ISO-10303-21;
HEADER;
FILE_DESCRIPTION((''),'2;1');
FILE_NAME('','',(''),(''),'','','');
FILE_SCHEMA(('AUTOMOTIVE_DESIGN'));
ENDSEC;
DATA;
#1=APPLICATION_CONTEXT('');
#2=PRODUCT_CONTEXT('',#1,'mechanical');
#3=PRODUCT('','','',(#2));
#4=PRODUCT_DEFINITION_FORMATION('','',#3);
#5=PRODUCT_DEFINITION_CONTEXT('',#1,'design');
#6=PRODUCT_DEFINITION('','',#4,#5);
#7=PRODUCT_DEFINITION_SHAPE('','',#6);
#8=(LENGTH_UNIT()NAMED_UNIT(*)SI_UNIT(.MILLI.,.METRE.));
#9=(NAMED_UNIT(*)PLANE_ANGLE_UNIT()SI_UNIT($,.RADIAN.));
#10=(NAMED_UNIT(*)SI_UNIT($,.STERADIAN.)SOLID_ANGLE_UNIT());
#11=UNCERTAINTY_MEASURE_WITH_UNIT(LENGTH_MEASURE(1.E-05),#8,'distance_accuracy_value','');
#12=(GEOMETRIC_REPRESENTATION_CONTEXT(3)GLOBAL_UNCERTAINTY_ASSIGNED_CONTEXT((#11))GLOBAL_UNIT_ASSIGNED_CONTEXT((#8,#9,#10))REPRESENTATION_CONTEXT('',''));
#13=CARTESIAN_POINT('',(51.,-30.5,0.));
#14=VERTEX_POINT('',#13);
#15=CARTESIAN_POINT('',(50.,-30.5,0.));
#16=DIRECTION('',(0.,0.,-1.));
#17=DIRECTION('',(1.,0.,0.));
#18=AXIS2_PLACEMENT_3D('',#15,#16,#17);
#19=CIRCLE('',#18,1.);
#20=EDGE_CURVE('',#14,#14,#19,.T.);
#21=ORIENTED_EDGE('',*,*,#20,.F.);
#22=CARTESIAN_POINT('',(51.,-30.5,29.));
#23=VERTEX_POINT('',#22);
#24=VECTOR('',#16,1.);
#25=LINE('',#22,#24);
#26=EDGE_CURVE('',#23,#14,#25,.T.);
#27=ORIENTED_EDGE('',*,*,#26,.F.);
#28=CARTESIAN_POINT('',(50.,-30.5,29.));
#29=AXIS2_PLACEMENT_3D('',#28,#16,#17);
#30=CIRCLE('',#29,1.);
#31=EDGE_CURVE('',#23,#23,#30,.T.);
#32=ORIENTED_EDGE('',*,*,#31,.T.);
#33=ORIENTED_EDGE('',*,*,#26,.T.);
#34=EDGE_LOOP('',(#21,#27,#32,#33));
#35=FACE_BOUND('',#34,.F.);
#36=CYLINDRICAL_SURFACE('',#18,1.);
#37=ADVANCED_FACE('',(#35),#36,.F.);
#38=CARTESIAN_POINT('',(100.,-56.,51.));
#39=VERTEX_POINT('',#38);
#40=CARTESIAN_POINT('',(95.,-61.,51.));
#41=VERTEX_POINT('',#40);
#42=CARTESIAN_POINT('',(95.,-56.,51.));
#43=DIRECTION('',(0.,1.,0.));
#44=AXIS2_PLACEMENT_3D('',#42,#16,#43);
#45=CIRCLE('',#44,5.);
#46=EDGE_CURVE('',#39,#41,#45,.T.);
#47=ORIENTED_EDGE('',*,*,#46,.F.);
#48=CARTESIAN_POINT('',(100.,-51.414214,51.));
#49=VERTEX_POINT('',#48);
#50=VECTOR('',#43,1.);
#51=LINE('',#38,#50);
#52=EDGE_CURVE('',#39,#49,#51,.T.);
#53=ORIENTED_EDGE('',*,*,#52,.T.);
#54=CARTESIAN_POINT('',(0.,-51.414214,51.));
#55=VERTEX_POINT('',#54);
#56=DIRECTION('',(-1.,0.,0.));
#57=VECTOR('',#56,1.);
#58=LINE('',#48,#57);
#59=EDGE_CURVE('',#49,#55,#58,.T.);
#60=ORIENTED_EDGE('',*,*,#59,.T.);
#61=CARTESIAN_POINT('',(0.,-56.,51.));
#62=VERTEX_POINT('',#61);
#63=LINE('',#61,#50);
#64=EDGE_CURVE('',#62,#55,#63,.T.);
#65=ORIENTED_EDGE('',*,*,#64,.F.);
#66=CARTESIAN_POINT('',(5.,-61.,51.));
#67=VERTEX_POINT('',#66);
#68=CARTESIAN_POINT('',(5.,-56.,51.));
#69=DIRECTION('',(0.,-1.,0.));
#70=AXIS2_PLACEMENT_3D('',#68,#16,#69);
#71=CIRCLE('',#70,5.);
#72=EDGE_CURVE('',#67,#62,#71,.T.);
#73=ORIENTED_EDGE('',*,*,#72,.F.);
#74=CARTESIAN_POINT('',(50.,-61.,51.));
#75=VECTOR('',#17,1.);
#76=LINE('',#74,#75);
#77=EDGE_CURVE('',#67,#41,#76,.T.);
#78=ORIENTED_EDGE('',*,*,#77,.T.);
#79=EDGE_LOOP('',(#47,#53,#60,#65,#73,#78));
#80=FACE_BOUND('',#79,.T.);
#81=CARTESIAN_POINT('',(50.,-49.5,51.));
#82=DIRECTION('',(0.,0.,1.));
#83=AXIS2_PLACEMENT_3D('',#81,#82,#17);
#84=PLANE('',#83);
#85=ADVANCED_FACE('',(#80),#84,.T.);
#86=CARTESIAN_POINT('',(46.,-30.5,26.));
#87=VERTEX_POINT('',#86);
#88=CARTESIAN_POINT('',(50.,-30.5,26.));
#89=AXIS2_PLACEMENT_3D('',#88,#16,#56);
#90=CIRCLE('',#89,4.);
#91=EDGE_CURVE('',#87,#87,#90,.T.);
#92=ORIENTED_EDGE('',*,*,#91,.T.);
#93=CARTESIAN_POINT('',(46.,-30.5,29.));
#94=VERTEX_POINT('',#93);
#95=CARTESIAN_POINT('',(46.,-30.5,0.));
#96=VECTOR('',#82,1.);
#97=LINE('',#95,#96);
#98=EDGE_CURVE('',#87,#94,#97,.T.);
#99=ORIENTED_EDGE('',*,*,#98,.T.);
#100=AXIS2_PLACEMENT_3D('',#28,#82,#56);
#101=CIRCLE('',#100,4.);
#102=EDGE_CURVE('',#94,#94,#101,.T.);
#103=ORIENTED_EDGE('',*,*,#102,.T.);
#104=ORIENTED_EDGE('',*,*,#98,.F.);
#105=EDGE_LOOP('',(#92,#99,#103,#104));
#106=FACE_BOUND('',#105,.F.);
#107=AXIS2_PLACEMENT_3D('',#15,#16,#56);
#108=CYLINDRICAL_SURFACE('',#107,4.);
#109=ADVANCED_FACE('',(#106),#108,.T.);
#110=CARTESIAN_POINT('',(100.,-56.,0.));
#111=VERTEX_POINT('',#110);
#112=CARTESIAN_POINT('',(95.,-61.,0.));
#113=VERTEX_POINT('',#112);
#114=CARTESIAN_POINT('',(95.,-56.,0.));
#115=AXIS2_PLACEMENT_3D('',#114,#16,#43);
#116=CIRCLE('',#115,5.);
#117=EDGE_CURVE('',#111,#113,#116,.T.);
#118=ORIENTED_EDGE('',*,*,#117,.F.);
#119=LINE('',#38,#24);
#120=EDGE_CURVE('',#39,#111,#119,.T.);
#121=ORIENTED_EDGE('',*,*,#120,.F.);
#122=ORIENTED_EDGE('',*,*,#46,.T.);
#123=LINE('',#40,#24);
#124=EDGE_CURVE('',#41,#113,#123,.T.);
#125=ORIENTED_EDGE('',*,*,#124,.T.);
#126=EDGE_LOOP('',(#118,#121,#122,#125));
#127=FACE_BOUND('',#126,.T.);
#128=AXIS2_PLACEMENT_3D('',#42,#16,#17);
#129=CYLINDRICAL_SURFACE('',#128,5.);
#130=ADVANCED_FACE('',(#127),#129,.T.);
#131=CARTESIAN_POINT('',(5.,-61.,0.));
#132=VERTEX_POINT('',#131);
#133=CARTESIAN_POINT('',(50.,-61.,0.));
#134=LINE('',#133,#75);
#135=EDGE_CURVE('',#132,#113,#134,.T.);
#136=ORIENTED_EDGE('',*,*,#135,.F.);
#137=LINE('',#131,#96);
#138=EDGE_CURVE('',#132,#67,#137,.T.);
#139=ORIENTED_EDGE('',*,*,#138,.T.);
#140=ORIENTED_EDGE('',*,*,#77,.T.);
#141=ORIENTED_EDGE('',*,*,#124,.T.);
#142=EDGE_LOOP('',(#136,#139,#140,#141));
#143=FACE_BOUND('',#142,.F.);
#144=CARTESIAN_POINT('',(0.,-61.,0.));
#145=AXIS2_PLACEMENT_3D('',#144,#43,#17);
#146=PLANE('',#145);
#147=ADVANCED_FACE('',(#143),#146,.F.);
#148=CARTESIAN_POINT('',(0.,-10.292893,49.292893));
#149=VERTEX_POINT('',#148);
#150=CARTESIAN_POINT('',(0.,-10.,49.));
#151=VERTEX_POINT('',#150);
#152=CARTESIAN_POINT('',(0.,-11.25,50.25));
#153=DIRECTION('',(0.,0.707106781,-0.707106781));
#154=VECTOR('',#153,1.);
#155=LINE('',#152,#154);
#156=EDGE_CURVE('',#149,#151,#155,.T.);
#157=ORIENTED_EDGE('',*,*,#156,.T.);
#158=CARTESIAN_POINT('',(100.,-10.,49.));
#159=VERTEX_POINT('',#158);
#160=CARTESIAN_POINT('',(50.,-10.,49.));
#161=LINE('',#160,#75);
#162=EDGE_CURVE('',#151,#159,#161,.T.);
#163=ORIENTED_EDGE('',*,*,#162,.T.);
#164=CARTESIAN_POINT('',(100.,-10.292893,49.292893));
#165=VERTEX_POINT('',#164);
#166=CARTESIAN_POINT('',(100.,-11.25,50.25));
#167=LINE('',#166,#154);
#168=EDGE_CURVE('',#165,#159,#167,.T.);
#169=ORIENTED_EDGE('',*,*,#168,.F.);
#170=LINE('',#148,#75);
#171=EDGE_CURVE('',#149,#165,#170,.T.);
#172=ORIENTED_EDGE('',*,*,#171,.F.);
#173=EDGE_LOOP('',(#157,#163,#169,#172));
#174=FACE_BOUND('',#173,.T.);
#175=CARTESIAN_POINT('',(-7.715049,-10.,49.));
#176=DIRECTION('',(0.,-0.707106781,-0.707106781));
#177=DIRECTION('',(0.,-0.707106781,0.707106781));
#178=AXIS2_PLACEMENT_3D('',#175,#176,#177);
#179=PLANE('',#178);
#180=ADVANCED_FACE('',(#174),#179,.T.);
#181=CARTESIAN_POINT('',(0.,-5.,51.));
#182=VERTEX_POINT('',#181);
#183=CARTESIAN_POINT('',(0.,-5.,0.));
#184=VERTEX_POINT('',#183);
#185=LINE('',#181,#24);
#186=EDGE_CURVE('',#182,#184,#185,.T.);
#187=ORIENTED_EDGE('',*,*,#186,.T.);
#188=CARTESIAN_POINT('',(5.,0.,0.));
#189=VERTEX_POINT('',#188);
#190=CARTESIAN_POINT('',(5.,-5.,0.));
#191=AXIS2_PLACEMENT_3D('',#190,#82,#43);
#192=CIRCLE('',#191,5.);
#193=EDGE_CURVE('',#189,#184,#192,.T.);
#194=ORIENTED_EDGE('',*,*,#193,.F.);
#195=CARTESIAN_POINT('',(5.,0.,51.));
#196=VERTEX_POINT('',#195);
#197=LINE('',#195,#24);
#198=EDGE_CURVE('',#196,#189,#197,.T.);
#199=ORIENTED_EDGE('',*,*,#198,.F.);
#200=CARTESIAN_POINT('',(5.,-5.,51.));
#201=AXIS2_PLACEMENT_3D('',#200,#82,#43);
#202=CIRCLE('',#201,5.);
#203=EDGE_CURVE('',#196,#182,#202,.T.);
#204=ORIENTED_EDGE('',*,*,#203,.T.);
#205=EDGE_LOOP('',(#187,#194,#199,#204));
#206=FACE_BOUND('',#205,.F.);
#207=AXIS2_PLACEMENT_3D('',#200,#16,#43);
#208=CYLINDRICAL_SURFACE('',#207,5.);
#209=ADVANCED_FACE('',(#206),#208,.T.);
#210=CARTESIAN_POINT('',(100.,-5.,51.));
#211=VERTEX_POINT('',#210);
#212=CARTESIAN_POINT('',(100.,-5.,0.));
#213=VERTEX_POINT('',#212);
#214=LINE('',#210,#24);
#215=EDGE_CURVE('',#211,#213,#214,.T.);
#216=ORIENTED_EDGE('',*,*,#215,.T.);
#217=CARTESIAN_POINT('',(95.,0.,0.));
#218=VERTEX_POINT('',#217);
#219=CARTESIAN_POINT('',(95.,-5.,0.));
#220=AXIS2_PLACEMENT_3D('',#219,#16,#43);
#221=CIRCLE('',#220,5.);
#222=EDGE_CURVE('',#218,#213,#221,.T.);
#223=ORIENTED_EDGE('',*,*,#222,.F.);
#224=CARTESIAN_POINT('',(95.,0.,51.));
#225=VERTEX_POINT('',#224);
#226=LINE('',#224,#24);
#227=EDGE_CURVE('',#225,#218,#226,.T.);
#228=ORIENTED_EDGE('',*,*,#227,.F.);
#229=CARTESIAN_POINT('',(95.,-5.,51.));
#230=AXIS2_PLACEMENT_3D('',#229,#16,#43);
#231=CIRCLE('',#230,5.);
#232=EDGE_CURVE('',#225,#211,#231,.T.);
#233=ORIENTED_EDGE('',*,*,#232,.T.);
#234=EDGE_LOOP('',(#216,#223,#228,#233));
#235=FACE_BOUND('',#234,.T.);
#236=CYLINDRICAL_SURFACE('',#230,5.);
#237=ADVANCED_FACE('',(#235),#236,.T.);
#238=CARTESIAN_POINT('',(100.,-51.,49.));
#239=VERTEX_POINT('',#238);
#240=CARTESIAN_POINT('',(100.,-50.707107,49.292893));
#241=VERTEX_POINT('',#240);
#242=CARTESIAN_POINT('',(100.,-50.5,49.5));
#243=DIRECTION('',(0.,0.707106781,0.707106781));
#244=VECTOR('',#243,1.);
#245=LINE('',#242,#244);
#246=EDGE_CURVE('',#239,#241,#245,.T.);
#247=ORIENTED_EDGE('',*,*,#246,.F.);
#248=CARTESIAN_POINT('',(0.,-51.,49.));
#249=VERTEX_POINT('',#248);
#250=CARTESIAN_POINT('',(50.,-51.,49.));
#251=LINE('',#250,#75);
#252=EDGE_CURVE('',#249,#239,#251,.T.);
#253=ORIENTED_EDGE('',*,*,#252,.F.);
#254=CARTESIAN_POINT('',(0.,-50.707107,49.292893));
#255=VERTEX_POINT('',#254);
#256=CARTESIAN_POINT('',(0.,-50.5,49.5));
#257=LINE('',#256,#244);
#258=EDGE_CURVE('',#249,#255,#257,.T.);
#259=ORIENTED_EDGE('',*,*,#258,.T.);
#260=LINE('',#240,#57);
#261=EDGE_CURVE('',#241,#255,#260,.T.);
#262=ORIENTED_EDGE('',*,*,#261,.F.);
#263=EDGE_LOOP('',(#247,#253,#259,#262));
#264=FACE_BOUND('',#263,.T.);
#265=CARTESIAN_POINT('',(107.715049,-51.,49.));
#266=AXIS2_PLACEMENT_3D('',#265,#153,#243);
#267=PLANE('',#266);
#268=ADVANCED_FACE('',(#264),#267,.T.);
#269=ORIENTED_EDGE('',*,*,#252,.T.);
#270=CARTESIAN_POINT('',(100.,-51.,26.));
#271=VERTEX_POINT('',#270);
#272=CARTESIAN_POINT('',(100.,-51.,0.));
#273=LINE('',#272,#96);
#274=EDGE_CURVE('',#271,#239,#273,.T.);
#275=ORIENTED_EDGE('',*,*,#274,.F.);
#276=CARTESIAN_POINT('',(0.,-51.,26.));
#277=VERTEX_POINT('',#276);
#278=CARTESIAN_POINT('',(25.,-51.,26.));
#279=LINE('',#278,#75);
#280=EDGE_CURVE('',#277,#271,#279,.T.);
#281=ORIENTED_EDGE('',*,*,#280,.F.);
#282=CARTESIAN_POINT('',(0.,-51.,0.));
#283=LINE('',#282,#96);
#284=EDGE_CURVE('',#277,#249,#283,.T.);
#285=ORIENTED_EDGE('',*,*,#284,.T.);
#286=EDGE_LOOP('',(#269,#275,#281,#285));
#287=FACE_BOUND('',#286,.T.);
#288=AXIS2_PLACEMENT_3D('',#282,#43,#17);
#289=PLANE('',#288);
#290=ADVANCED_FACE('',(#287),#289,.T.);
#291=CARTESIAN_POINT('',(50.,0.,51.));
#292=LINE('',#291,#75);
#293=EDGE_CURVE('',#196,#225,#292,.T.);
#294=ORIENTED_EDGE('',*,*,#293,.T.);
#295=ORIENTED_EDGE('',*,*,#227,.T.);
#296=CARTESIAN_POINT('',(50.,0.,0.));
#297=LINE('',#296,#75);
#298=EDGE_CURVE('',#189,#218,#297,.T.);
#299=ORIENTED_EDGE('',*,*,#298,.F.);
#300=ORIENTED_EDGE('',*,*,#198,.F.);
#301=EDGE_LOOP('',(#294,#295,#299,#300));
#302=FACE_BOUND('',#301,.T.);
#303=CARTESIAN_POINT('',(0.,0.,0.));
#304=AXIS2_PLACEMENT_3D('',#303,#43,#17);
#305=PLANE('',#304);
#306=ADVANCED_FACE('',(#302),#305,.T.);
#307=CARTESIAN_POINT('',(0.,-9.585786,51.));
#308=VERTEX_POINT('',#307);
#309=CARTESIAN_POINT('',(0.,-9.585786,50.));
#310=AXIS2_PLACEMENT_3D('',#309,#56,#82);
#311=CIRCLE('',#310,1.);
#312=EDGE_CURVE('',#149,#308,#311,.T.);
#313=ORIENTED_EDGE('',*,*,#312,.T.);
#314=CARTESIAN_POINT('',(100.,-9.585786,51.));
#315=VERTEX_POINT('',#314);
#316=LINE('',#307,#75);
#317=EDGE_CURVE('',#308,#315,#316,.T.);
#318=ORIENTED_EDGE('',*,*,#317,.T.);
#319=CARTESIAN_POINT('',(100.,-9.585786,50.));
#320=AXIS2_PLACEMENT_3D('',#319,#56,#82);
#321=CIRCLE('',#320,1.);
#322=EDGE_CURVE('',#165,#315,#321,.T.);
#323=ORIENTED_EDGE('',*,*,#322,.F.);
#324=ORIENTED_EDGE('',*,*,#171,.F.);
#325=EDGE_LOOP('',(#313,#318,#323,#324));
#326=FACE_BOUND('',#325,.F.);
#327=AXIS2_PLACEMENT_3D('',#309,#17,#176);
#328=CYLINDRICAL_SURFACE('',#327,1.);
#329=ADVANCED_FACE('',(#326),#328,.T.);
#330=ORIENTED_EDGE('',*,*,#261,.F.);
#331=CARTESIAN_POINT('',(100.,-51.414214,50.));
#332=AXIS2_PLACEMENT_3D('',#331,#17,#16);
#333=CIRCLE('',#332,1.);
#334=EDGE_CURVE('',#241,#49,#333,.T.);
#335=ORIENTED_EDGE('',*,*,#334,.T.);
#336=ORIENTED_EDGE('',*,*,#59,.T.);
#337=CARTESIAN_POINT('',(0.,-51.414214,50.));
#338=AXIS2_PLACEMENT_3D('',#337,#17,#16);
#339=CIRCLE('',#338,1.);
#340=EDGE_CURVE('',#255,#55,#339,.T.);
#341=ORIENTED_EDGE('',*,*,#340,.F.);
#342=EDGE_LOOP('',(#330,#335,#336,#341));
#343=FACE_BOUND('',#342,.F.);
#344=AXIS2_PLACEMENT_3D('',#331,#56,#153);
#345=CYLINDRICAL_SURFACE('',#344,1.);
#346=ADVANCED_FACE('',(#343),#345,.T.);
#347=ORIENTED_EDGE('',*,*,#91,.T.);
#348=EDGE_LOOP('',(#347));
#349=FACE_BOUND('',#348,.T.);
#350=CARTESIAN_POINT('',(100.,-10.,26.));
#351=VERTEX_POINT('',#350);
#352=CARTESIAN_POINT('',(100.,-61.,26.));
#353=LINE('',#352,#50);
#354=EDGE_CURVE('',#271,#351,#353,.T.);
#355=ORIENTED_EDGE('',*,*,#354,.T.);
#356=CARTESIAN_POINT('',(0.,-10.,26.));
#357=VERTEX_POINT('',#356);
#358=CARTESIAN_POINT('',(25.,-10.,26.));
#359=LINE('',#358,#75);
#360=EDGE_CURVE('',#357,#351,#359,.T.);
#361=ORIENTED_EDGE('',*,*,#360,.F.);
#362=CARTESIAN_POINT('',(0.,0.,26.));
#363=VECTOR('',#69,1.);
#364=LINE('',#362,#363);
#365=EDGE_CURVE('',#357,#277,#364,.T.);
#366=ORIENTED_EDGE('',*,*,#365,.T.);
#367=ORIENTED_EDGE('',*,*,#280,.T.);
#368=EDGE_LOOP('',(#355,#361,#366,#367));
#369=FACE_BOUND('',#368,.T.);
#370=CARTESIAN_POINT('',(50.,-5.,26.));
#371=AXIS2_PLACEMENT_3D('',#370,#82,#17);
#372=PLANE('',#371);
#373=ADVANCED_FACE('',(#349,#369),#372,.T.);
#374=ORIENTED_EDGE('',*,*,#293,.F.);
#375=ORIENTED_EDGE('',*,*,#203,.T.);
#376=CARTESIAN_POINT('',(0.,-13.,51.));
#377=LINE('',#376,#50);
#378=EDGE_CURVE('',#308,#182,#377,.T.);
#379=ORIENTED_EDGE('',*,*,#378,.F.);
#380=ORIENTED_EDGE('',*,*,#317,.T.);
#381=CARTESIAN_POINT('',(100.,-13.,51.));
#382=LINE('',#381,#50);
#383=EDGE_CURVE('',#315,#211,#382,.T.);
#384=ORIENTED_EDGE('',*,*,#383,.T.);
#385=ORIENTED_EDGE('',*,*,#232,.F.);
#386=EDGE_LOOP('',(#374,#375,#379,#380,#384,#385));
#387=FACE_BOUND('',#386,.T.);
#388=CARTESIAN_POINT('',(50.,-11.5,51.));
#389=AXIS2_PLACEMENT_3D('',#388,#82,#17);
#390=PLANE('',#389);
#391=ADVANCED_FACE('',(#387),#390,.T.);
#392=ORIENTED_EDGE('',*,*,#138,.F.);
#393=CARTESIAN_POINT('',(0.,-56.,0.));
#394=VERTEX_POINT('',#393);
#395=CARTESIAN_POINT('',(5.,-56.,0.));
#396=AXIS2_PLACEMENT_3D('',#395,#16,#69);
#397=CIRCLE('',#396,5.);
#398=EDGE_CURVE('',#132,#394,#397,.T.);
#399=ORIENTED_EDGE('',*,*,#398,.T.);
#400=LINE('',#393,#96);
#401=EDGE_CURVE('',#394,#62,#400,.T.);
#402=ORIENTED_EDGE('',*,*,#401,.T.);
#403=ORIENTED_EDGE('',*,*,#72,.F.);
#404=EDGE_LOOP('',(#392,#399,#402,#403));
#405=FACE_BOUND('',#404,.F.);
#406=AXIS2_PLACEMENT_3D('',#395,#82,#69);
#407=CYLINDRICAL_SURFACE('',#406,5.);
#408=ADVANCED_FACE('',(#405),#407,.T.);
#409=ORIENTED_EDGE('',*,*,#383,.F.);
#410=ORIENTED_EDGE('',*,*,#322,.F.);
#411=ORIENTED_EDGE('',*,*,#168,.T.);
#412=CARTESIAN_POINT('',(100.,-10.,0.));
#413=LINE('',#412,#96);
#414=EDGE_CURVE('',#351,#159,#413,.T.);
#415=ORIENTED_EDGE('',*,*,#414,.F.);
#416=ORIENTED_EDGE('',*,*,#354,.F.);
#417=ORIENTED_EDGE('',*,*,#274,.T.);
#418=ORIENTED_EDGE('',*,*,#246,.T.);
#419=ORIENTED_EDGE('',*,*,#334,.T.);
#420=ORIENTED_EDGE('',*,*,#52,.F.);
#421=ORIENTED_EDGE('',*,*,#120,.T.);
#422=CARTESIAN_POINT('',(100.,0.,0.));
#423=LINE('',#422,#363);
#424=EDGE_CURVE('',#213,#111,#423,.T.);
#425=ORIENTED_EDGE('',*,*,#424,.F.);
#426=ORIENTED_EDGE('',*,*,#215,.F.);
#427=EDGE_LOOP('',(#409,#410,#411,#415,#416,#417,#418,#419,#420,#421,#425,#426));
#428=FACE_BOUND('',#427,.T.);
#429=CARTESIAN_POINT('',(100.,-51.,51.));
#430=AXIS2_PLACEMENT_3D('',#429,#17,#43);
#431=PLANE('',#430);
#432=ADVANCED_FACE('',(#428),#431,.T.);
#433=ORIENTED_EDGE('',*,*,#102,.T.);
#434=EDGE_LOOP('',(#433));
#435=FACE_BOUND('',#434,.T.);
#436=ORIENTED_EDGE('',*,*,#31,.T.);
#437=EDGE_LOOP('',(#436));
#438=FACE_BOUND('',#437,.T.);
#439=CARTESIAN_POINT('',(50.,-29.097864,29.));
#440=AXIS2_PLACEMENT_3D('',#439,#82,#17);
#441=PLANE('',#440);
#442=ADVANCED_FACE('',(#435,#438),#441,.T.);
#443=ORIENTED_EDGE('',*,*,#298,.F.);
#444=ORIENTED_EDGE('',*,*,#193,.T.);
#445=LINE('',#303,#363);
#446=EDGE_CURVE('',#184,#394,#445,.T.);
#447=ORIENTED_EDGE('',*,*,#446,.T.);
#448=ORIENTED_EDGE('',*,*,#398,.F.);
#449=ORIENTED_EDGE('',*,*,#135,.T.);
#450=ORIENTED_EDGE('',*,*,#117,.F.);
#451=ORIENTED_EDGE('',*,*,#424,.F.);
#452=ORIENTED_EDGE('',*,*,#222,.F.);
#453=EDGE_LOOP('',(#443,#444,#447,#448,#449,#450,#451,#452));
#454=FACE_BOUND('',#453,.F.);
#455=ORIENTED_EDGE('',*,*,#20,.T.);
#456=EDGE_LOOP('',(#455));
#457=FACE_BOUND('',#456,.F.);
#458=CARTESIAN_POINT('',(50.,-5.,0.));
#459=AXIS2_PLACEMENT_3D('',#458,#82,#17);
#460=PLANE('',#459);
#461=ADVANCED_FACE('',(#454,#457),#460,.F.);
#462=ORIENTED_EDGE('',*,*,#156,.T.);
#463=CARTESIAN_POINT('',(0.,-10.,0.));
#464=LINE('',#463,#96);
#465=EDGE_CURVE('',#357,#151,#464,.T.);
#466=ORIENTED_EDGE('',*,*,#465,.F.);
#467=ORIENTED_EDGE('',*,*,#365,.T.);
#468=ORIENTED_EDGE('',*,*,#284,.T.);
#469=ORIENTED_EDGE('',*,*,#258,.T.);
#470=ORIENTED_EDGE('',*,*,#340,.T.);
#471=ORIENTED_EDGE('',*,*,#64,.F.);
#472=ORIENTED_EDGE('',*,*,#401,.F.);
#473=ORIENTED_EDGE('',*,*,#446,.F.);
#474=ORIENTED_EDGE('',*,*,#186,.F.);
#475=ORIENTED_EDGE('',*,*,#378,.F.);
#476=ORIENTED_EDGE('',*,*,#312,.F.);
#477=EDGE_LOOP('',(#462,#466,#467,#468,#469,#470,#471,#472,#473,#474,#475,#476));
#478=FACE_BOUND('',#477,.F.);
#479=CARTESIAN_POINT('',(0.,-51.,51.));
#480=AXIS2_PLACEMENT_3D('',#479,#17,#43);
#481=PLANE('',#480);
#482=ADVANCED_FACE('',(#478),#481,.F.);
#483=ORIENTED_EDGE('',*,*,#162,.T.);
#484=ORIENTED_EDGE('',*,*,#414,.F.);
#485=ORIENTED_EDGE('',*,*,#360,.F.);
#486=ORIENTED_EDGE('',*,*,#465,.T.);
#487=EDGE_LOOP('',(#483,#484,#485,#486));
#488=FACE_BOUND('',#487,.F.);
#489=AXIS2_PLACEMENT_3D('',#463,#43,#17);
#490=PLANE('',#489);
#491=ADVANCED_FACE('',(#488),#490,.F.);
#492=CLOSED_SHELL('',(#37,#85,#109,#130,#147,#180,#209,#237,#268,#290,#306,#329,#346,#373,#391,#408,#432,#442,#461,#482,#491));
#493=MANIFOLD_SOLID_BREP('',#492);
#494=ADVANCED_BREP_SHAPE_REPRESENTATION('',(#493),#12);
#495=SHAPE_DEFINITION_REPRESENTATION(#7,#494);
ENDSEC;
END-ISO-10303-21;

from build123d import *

# Parameters (mm, degrees)
F0_W         = 100
F0_H         = 10
F1_DEPTH     = 51
F2_DEPTH     = 26
F3_DEPTH     = 29
F4_R         = 5
F5_W         = 100
F5_H         = 3
F6_DEPTH     = 2
F7_T4_DEPTH  = 115.4300979278
F8_W         = 100
F8_H         = 3
F9_DEPTH     = 2
F10_T4_DEPTH = 115.4300979278
F11_R        = 1


# Not quite as in the source:
# - a fillet or chamfer that OpenCascade refuses, or shapes differently, is made with other operations: its cross-section is extruded or revolved along the edge and cut away or added


with BuildPart() as f1:
    # F0 (on Top) → F1 (new body)
    with BuildSketch(Plane.XY):
        with Locations((50, -5)):
            Rectangle(F0_W, F0_H)
    extrude(amount=F1_DEPTH)



with BuildPart() as f1b:
    # F0 (on Top) → F1, piece 2 (new body)
    with BuildSketch(Plane.XY):
        with Locations((50, -56)):
            Rectangle(F0_W, F0_H)
    extrude(amount=F1_DEPTH)


with BuildPart() as f1_1:
    add(f1.part)

    add(f1b.part)  # F2 merges F1b
    # F0 (on Top) → F2 (join)
    with BuildSketch(Plane.XY):
        with Locations((50, -5)):
            Rectangle(F0_W, F0_H)
        with BuildLine():
            Line((100, -10), (0, -10))
            Line((0, -10), (0, -30.5))
            Line((0, -30.5), (46, -30.5))
            ThreePointArc((46, -30.5), (50, -26.5), (54, -30.5))
            Line((54, -30.5), (100, -30.5))
            Line((100, -30.5), (100, -10))
        make_face()
        with BuildLine():
            Line((46, -30.5), (0, -30.5))
            Line((0, -30.5), (0, -51))
            Line((0, -51), (100, -51))
            Line((100, -51), (100, -30.5))
            Line((100, -30.5), (54, -30.5))
            ThreePointArc((54, -30.5), (50, -34.5), (46, -30.5))
        make_face()
        with Locations((50, -56)):
            Rectangle(F0_W, F0_H)
        with BuildLine():
            ThreePointArc((54, -30.5), (50, -26.5), (46, -30.5))
            Line((46, -30.5), (49, -30.5))
            ThreePointArc((49, -30.5), (50, -29.5), (51, -30.5))
            Line((51, -30.5), (54, -30.5))
        make_face()
        with BuildLine():
            Line((49, -30.5), (46, -30.5))
            ThreePointArc((46, -30.5), (50, -34.5), (54, -30.5))
            Line((54, -30.5), (51, -30.5))
            ThreePointArc((51, -30.5), (50, -31.5), (49, -30.5))
        make_face()
    extrude(amount=F2_DEPTH)

    # F0 (on Top) → F3 (join)
    with BuildSketch(Plane.XY):
        with BuildLine():
            ThreePointArc((54, -30.5), (50, -26.5), (46, -30.5))
            Line((46, -30.5), (49, -30.5))
            ThreePointArc((49, -30.5), (50, -29.5), (51, -30.5))
            Line((51, -30.5), (54, -30.5))
        make_face()
        with BuildLine():
            Line((49, -30.5), (46, -30.5))
            ThreePointArc((46, -30.5), (50, -34.5), (54, -30.5))
            Line((54, -30.5), (51, -30.5))
            ThreePointArc((51, -30.5), (50, -31.5), (49, -30.5))
        make_face()
    extrude(amount=F3_DEPTH)

    # F4
    f4_edges = [f1_1.edges().sort_by_distance(p)[0] for p in [
        (100, 0, 25.5),
        (0, 0, 25.5),
        (100, -61, 25.5),
        (0, -61, 25.5),
    ]]
    fillet(f4_edges, radius=F4_R)

    # F5 (on face) → F6 (join)
    with BuildSketch(Plane.XY.offset(51)):
        with Locations((50, -11.5)):
            Rectangle(F5_W, F5_H)
    extrude(amount=-F6_DEPTH)

    # F7: chamfer of 3 on 1 edges, made by hand


with BuildPart() as f7_tool2:
    # F7_s3 → F7_t4 (new body)
    with BuildSketch(Plane.YZ.offset(-7.7150489639)):
        Polygon((-10, 49), (-13, 52), (-13, 49), align=None)
    extrude(amount=F7_T4_DEPTH)

    split(bisect_by=Plane.XZ.offset(10), keep=Keep.TOP)


with BuildPart() as f1_2:
    add(f1_1.part)

    # F7_t1: cut F7_tool2
    add(f7_tool2.part, mode=Mode.SUBTRACT)

    # F8 (on face) → F9 (join)
    with BuildSketch(Plane.XY.offset(51)):
        with Locations((50, -49.5)):
            Rectangle(F8_W, F8_H)
    extrude(amount=-F9_DEPTH)

    # F10: chamfer of 3 on 1 edges, made by hand


with BuildPart() as f10_tool2:
    # F10_s3 → F10_t4 (new body)
    with BuildSketch(Plane.YZ.offset(107.7150489639)):
        Polygon((-51, 49), (-48, 52), (-48, 49), align=None)
    extrude(amount=-F10_T4_DEPTH)

    split(bisect_by=Plane.XZ.offset(51), keep=Keep.BOTTOM)


with BuildPart() as f1_3:
    add(f1_2.part)

    # F10_t1: cut F10_tool2
    add(f10_tool2.part, mode=Mode.SUBTRACT)

    # F11
    f11_edges = [f1_3.edges().sort_by_distance(p)[0] for p in [
        (50, -12, 51),
        (50, -49, 51),
    ]]
    fillet(f11_edges, radius=F11_R)


solid = f1_3.part
